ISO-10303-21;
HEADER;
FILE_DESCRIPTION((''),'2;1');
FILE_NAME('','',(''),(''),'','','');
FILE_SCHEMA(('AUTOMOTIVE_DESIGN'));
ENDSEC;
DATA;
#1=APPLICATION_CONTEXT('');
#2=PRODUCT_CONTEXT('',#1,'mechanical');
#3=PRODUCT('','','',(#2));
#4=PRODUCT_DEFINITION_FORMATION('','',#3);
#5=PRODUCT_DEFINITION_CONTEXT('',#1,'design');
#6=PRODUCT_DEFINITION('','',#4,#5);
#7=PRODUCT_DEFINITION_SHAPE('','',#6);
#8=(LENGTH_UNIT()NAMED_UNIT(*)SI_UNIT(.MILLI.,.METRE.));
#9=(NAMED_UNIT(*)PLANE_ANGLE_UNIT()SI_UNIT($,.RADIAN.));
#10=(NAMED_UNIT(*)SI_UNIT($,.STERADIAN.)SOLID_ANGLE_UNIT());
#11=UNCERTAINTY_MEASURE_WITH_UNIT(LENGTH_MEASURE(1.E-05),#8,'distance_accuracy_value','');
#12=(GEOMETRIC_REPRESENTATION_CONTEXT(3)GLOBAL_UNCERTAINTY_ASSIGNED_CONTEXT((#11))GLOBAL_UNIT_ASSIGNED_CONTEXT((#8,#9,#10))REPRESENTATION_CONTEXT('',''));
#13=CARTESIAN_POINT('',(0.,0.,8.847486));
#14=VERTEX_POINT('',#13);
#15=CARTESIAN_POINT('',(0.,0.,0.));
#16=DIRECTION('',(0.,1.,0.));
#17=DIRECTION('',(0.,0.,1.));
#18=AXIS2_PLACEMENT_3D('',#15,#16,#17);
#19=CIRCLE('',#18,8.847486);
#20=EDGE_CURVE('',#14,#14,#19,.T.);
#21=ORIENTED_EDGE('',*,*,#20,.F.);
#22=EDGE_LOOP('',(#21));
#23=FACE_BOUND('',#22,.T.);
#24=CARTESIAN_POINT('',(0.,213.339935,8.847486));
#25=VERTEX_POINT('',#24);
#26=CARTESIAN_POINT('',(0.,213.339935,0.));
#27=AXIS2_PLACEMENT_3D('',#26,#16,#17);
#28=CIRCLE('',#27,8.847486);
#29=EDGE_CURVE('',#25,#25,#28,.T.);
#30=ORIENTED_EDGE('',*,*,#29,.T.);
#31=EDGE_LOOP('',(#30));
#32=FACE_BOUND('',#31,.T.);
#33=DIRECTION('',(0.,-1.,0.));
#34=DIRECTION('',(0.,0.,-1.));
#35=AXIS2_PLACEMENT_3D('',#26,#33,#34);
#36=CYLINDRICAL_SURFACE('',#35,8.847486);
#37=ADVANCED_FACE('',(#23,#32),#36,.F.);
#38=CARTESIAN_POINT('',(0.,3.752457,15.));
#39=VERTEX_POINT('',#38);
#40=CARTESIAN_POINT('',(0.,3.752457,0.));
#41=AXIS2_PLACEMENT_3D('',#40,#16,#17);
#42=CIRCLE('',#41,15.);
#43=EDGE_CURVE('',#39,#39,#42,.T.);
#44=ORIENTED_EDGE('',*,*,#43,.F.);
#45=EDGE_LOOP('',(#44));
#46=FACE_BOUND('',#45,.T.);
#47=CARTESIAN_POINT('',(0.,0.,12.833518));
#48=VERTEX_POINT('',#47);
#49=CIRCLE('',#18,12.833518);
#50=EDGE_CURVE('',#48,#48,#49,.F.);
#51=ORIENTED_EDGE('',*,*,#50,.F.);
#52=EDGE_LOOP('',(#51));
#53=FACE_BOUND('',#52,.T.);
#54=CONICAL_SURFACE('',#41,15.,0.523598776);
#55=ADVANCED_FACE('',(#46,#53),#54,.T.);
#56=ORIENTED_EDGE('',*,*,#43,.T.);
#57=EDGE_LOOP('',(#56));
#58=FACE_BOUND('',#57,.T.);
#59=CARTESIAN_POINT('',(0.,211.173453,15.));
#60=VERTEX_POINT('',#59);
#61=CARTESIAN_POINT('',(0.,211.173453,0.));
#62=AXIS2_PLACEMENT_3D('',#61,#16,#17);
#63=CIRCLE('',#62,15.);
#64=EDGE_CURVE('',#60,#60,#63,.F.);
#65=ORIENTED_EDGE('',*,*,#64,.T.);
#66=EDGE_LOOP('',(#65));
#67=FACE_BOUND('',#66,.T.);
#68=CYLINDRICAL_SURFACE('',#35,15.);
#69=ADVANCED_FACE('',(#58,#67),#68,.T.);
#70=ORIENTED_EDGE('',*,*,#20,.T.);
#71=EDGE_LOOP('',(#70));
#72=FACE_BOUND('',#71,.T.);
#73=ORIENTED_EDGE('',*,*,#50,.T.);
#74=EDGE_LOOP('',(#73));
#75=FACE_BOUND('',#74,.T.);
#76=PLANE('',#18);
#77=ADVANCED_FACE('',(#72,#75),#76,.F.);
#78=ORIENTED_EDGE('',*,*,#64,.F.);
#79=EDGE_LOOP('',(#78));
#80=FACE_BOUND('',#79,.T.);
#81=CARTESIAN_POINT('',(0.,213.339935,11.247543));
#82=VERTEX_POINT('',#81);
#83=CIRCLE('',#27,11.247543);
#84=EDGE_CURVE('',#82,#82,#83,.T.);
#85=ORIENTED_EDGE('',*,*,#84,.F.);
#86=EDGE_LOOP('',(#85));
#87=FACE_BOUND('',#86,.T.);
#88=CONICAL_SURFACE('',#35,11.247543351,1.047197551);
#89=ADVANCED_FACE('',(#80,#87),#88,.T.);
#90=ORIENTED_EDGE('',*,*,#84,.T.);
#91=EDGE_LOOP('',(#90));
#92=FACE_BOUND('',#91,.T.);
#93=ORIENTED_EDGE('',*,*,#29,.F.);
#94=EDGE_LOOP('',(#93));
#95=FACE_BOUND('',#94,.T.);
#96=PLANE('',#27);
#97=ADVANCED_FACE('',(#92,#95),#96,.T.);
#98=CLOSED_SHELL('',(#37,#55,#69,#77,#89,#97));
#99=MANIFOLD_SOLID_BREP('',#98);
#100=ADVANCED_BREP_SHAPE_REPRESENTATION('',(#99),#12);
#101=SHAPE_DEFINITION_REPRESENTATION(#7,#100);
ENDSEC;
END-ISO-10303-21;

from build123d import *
from OCP.BRepFilletAPI import BRepFilletAPI_MakeChamfer

# Parameters (mm, degrees)
SKETCH1_R           = 15
BOSS_EXTRUDE1_DEPTH = 213.33993489
SKETCH2_R           = 8.847485813
CUT_EXTRUDE1_DEPTH  = 215.391995697
CHAMFER1_SIZE       = 2.166481856
CHAMFER1_SIZE2      = 3.752456649


with BuildPart() as part:
    # Sketch1 → Boss-Extrude1 (new body)
    with BuildSketch(Plane(origin=(0, 0, 0), x_dir=(1, 0, 0), z_dir=(0, 1, 0))):
        Circle(SKETCH1_R)
    extrude(amount=BOSS_EXTRUDE1_DEPTH)

    # Sketch2 → Cut-Extrude1 (cut, through all)
    with BuildSketch(Plane(origin=(0, 0, 0), x_dir=(1, 0, 0), z_dir=(0, 1, 0))):
        Circle(SKETCH2_R)
    extrude(amount=CUT_EXTRUDE1_DEPTH, mode=Mode.SUBTRACT)

    # Chamfer1: one chamfer whose edges measure the first distance from different faces: ONE call of the kernel's chamfer builder (chamfer() names one face for all edges)
    chamfer1_edges_1 = [part.edges().sort_by_distance(p)[0] for p in [
        (-15, 213.33993489, 0),
    ]]
    chamfer1_side_1 = [part.faces().sort_by_distance(p)[0] for p in [
        (-15, 106.669967445, 0),
    ]]
    chamfer1_edges_2 = [part.edges().sort_by_distance(p)[0] for p in [
        (-15, 0, 0),
    ]]
    chamfer1_side_2 = [part.faces().sort_by_distance(p)[0] for p in [
        (-14.575735931, 0, 0),
    ]]
    chamfer1 = BRepFilletAPI_MakeChamfer(part.part.solid().wrapped)
    for e in chamfer1_edges_1:
        chamfer1.Add(CHAMFER1_SIZE, CHAMFER1_SIZE2, e.wrapped, chamfer1_side_1[0].wrapped)  # the first distance lies on this face
    for e in chamfer1_edges_2:
        chamfer1.Add(CHAMFER1_SIZE, CHAMFER1_SIZE2, e.wrapped, chamfer1_side_2[0].wrapped)  # the first distance lies on this face
    add(Compound.cast(chamfer1.Shape()), mode=Mode.REPLACE)


solid = part.part
